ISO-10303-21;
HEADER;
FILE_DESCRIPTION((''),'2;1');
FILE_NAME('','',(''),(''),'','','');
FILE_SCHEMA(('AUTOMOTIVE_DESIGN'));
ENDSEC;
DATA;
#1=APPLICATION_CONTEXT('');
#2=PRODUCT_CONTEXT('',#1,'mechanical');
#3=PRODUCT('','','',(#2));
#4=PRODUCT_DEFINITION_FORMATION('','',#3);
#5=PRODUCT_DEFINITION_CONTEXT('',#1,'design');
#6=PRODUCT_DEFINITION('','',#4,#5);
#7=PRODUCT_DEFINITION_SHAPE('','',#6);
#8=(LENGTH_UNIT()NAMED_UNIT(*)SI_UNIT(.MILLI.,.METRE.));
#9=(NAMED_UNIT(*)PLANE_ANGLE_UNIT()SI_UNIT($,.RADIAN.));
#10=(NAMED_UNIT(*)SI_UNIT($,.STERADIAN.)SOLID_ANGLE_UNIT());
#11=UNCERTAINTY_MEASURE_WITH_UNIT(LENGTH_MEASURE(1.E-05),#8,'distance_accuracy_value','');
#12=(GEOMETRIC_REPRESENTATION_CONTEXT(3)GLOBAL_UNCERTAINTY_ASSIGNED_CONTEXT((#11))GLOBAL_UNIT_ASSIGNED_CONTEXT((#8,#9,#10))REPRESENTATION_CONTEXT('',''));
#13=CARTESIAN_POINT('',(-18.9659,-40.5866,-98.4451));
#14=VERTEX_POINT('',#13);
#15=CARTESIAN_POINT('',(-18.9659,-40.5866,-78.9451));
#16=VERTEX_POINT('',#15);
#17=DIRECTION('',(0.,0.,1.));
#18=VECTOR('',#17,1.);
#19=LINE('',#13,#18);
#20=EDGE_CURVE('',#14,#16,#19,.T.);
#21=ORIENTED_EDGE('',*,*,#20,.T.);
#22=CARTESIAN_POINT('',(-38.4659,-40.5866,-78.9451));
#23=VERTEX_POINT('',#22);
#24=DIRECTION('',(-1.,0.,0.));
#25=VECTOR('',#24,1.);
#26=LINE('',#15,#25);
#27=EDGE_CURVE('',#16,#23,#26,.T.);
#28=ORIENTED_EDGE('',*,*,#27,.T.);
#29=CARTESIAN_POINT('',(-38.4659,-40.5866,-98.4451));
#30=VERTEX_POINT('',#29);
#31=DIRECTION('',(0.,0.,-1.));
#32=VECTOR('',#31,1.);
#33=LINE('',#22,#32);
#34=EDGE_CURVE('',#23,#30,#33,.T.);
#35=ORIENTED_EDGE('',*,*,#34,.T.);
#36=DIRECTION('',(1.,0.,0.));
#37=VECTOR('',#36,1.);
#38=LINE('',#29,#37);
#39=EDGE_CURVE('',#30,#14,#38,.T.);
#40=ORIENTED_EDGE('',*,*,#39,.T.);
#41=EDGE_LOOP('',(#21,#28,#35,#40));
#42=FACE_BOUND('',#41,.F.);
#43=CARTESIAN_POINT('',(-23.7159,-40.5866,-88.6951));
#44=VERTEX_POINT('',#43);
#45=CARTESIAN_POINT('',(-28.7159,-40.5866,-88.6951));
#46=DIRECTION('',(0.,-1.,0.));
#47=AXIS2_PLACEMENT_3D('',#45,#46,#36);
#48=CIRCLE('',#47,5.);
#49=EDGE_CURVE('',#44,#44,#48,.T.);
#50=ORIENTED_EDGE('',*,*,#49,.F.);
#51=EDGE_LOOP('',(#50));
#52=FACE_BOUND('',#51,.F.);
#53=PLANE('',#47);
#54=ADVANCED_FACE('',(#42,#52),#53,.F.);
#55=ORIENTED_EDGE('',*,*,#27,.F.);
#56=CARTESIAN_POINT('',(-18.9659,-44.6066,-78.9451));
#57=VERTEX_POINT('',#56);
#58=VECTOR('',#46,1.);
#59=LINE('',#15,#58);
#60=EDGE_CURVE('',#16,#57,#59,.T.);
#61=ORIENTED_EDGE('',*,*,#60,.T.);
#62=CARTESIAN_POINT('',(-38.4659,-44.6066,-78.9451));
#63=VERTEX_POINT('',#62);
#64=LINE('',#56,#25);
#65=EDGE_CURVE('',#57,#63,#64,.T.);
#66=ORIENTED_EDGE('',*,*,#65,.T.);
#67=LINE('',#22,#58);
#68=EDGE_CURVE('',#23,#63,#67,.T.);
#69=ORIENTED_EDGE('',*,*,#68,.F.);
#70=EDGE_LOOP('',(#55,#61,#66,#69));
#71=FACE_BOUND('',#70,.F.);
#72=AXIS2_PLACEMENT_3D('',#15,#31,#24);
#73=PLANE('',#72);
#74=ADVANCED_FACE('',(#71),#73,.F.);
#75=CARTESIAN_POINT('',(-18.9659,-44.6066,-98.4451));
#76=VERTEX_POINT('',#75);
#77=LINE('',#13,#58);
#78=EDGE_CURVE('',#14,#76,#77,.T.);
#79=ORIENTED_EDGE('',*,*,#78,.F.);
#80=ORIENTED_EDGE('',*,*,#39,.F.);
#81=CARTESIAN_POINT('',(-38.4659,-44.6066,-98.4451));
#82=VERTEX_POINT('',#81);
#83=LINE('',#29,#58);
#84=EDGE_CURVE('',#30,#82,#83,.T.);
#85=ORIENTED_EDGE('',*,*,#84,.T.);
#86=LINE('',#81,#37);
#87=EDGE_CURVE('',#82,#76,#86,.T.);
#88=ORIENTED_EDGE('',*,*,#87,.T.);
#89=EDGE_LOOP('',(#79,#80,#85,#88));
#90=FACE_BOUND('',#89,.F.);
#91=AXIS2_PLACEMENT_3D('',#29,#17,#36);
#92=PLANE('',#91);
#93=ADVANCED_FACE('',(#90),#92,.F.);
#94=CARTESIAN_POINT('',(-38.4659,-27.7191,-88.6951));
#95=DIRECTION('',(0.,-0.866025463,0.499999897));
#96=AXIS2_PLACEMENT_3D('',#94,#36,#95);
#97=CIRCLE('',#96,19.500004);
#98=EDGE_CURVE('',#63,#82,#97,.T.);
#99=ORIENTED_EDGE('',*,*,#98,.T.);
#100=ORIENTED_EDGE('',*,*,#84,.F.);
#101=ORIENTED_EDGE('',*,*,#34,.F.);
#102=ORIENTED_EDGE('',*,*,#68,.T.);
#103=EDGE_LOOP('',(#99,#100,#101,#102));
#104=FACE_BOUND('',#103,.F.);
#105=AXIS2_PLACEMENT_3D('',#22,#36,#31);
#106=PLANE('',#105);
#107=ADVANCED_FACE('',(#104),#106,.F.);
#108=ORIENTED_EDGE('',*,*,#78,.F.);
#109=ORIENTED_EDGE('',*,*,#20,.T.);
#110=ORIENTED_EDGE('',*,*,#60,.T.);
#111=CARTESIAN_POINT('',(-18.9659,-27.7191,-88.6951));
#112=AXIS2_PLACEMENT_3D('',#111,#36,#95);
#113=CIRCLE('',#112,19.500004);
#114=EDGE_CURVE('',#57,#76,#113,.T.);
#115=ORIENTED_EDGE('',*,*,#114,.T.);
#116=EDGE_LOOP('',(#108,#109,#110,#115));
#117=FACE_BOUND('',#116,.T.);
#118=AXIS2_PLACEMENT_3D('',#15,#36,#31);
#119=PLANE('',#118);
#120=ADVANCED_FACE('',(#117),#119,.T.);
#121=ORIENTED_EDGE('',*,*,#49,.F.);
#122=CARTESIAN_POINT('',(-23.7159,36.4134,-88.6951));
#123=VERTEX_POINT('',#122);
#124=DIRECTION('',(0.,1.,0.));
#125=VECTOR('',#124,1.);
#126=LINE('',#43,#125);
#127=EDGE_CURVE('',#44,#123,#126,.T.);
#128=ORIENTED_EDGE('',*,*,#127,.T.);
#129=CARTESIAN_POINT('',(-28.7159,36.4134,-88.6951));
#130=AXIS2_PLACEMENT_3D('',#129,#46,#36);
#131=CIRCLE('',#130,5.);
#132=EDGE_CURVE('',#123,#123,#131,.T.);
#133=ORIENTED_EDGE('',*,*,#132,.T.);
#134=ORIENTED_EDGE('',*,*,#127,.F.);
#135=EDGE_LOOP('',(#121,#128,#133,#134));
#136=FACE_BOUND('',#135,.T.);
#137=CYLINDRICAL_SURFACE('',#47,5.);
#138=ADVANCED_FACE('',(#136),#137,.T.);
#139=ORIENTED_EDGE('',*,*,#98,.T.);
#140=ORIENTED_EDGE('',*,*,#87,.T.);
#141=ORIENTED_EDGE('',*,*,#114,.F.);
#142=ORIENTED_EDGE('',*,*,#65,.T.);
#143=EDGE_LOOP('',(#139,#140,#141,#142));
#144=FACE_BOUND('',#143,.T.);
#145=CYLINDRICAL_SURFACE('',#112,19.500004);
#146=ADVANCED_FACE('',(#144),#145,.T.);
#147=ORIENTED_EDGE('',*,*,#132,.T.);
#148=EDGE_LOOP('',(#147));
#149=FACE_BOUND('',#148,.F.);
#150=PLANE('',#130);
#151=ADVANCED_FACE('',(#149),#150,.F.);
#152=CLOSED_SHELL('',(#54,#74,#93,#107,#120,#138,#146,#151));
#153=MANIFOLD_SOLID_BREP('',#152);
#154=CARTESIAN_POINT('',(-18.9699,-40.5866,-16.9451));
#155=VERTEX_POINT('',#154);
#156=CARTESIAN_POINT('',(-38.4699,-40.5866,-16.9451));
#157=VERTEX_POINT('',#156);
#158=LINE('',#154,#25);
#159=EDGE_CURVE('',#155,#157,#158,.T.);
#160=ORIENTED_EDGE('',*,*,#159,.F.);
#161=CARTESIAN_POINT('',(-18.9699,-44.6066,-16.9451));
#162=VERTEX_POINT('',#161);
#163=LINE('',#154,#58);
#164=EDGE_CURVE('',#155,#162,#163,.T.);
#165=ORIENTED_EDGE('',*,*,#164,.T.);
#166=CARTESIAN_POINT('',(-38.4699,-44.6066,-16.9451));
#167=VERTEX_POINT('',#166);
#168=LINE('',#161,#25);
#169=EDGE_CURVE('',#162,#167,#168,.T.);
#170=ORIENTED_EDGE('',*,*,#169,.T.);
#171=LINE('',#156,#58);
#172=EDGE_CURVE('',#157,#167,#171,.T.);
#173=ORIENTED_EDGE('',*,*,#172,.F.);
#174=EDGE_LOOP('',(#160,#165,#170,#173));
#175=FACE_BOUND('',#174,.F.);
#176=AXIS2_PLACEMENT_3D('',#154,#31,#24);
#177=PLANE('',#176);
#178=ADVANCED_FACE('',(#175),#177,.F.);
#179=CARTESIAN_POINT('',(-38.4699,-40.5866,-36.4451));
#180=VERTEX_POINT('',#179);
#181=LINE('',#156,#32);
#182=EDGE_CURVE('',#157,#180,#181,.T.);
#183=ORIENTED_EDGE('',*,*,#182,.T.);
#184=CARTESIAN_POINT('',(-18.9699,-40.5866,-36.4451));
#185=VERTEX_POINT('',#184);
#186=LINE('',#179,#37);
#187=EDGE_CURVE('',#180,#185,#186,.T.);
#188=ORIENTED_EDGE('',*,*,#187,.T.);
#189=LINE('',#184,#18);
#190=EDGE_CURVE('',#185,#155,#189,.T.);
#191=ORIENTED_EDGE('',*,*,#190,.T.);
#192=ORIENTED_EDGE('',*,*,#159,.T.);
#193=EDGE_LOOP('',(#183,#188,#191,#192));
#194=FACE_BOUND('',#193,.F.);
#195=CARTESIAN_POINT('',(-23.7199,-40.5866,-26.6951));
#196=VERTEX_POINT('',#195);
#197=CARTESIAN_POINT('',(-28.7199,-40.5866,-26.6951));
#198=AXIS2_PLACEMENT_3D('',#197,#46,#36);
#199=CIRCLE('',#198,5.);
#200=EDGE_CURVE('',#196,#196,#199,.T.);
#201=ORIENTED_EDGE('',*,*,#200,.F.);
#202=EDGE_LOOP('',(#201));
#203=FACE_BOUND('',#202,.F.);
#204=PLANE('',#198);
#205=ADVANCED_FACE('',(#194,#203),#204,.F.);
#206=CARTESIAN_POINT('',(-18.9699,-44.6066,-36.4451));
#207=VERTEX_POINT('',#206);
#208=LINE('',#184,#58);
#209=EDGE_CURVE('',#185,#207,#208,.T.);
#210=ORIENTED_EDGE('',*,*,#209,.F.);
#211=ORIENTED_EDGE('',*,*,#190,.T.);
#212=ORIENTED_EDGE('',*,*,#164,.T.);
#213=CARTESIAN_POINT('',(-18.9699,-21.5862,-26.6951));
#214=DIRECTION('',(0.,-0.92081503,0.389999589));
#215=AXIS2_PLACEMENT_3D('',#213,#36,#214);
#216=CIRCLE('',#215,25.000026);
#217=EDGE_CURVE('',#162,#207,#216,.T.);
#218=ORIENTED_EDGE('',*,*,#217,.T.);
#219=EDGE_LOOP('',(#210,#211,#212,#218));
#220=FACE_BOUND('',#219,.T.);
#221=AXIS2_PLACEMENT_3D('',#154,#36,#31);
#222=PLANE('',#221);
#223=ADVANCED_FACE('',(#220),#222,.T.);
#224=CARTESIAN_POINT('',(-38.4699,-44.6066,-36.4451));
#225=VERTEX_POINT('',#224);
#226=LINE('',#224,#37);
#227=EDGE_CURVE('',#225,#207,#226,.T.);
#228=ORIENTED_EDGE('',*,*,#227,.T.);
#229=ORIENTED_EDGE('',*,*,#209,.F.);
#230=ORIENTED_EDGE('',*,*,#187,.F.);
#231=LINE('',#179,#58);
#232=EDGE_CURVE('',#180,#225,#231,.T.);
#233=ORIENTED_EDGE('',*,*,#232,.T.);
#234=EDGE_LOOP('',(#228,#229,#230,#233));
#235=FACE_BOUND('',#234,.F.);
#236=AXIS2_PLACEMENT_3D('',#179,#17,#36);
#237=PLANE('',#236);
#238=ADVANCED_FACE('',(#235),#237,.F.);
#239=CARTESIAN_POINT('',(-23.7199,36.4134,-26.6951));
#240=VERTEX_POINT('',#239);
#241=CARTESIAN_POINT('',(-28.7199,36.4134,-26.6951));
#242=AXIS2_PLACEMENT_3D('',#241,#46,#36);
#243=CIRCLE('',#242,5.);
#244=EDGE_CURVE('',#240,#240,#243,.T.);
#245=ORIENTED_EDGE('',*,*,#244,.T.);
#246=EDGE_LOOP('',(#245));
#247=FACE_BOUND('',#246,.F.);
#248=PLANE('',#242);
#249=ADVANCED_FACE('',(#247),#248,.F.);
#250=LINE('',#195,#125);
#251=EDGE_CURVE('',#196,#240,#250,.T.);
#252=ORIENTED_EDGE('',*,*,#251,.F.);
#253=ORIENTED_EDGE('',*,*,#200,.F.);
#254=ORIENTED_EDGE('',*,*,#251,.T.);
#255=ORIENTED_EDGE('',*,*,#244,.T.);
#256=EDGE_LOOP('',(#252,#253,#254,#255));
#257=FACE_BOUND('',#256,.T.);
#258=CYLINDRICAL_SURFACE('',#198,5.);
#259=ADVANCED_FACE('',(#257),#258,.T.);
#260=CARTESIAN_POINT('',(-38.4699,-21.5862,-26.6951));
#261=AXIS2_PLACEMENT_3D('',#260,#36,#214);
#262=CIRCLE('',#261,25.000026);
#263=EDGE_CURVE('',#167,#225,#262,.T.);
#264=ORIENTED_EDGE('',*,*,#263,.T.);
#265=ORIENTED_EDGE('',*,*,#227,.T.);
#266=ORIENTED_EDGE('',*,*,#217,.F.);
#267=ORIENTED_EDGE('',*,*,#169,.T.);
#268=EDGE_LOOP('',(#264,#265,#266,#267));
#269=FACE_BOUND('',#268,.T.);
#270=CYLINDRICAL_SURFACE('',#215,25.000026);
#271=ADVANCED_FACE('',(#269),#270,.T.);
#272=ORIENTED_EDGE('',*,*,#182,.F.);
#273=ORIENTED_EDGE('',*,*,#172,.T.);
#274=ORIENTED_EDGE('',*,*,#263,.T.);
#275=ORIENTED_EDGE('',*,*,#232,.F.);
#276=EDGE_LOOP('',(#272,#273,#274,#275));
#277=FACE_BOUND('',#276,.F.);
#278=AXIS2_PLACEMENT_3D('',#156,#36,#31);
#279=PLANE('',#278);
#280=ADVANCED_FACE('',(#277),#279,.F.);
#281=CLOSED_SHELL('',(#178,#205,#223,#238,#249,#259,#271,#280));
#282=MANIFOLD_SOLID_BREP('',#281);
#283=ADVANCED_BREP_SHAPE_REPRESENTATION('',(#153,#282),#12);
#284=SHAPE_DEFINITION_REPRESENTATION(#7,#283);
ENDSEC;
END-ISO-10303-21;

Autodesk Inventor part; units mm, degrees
ref_plane "YZ Plane" through (0, 0, 0) normal (1, 0, 0) x (0, 1, 0)
ref_plane "XZ Plane" through (0, 0, 0) normal (0, 1, 0) x (-1, 0, 0)
ref_plane "XY Plane" through (0, 0, 0) normal (0, 0, 1) x (1, 0, 0)
ref_plane "Work Plane1" through (-28.7199, -40.5866, -26.6951) normal (0, -1, 0) x (1, 0, 0)
sketch "Sketch1" plane through (-28.7199, -40.5866, -26.6951) normal (0, -1, 0) x (1, 0, 0)
  line L0 (9.75, 9.75) -> (-9.75, 9.75)
  line L1 (-9.75, 9.75) -> (-9.75, -9.75)
  line L2 (-9.75, -9.75) -> (9.75, -9.75)
  line L3 (9.75, -9.75) -> (9.75, 9.75)
  line L4 (9.75, 9.75) -> (-9.75, -9.75) construction
  line L5 (-9.75, 9.75) -> (9.75, -9.75) construction
  circle A0 centre (0, 0) radius 5
  point P0 (28.7199, 26.6951)
  dimension "d0" = 19.5
  dimension "d1" = 19.5
  dimension "d2" = 10
extrude "Extrusion1" add sketch "Sketch1" against normal blind 77 contours A0
thread "Thread1" size "M10x1.5" class "6g" standard "ANSI Metric M Profile" length 76
sketch "Sketch2" plane through (-28.7199, -40.5866, -26.6951) normal (0, -1, 0) x (1, 0, 0)
  circle A0 centre (0, 0) radius 5 projected
  line L0 (9.75, 9.75) -> (-9.75, 9.75)
  line L1 (-9.75, 9.75) -> (-9.75, -9.75)
  line L2 (-9.75, -9.75) -> (9.75, -9.75)
  line L3 (9.75, -9.75) -> (9.75, 9.75)
  line L4 (9.75, 9.75) -> (-9.75, -9.75) construction
  line L5 (-9.75, 9.75) -> (9.75, -9.75) construction
  point P0 (28.7199, 26.6951)
  dimension "d7" = 19.5
  dimension "d8" = 19.5
extrude "Extrusion2" add sketch "Sketch2" along normal blind 4.02 contours A0 | L3 L2 L1 L0
sketch "Sketch3" plane through (-18.9699, -40.5866, -16.9451) normal (1, 0, 0) x (0, 0, -1)
  line L0 (19.5, -4.02) -> (0, -4.02) projected
  arc A0 (0, -4.02) -> (19.5, -4.02) centre (9.75, 19.0004) ccw
  point P0 (-16.9451, 40.5866)
  dimension "d11" = 25
extrude "Extrusion3" add sketch "Sketch3" against normal blind 19.5
ref_plane "Work Plane2" through (-28.7159, -40.5866, -88.6951) normal (0, -1, 0) x (1, 0, 0)
sketch "Sketch4" plane through (-28.7159, -40.5866, -88.6951) normal (0, -1, 0) x (1, 0, 0)
  circle A0 centre (0, 0) radius 5 projected
  circle A1 centre (0, 0) radius 5
  line L0 (9.75, 9.75) -> (-9.75, 9.75)
  line L1 (-9.75, 9.75) -> (-9.75, -9.75)
  line L2 (-9.75, -9.75) -> (9.75, -9.75)
  line L3 (9.75, -9.75) -> (9.75, 9.75)
  line L4 (9.75, 9.75) -> (-9.75, -9.75) construction
  line L5 (-9.75, 9.75) -> (9.75, -9.75) construction
  point P0 (28.7159, 88.6951)
  dimension "d14" = 19.5
  dimension "d15" = 19.5
extrude "Extrusion4" add sketch "Sketch4" against normal blind 77 contours A0
sketch "Sketch5" plane through (-28.7159, -40.5866, -88.6951) normal (0, -1, 0) x (1, 0, 0)
  circle A0 centre (0, 0) radius 5 projected
  line L0 (9.75, 9.75) -> (-9.75, 9.75)
  line L1 (-9.75, 9.75) -> (-9.75, -9.75)
  line L2 (-9.75, -9.75) -> (9.75, -9.75)
  line L3 (9.75, -9.75) -> (9.75, 9.75)
  line L4 (9.75, 9.75) -> (-9.75, -9.75) construction
  line L5 (-9.75, 9.75) -> (9.75, -9.75) construction
  point P0 (28.7159, 88.6951)
  dimension "d18" = 19.5
  dimension "d19" = 19.5
extrude "Extrusion5" add sketch "Sketch5" along normal blind 4.02 contours A0 | L3 L2 L1 L0
sketch "Sketch6" plane through (-18.9659, -40.5866, -78.9451) normal (1, 0, 0) x (0, 0, -1)
  line L0 (19.5, -4.02) -> (0, -4.02) projected
  arc A0 (0, -4.02) -> (19.5, -4.02) centre (9.75, 12.8675) ccw
  point P0 (-78.9451, 40.5866)
  dimension "d22" = 19.5
extrude "Extrusion6" add sketch "Sketch6" against normal blind 19.5
thread "Thread2" size "M10x1.5" class "6g" standard "ANSI Metric M Profile" length 76
properties part number "SCREW" material "Steel, Mild"
